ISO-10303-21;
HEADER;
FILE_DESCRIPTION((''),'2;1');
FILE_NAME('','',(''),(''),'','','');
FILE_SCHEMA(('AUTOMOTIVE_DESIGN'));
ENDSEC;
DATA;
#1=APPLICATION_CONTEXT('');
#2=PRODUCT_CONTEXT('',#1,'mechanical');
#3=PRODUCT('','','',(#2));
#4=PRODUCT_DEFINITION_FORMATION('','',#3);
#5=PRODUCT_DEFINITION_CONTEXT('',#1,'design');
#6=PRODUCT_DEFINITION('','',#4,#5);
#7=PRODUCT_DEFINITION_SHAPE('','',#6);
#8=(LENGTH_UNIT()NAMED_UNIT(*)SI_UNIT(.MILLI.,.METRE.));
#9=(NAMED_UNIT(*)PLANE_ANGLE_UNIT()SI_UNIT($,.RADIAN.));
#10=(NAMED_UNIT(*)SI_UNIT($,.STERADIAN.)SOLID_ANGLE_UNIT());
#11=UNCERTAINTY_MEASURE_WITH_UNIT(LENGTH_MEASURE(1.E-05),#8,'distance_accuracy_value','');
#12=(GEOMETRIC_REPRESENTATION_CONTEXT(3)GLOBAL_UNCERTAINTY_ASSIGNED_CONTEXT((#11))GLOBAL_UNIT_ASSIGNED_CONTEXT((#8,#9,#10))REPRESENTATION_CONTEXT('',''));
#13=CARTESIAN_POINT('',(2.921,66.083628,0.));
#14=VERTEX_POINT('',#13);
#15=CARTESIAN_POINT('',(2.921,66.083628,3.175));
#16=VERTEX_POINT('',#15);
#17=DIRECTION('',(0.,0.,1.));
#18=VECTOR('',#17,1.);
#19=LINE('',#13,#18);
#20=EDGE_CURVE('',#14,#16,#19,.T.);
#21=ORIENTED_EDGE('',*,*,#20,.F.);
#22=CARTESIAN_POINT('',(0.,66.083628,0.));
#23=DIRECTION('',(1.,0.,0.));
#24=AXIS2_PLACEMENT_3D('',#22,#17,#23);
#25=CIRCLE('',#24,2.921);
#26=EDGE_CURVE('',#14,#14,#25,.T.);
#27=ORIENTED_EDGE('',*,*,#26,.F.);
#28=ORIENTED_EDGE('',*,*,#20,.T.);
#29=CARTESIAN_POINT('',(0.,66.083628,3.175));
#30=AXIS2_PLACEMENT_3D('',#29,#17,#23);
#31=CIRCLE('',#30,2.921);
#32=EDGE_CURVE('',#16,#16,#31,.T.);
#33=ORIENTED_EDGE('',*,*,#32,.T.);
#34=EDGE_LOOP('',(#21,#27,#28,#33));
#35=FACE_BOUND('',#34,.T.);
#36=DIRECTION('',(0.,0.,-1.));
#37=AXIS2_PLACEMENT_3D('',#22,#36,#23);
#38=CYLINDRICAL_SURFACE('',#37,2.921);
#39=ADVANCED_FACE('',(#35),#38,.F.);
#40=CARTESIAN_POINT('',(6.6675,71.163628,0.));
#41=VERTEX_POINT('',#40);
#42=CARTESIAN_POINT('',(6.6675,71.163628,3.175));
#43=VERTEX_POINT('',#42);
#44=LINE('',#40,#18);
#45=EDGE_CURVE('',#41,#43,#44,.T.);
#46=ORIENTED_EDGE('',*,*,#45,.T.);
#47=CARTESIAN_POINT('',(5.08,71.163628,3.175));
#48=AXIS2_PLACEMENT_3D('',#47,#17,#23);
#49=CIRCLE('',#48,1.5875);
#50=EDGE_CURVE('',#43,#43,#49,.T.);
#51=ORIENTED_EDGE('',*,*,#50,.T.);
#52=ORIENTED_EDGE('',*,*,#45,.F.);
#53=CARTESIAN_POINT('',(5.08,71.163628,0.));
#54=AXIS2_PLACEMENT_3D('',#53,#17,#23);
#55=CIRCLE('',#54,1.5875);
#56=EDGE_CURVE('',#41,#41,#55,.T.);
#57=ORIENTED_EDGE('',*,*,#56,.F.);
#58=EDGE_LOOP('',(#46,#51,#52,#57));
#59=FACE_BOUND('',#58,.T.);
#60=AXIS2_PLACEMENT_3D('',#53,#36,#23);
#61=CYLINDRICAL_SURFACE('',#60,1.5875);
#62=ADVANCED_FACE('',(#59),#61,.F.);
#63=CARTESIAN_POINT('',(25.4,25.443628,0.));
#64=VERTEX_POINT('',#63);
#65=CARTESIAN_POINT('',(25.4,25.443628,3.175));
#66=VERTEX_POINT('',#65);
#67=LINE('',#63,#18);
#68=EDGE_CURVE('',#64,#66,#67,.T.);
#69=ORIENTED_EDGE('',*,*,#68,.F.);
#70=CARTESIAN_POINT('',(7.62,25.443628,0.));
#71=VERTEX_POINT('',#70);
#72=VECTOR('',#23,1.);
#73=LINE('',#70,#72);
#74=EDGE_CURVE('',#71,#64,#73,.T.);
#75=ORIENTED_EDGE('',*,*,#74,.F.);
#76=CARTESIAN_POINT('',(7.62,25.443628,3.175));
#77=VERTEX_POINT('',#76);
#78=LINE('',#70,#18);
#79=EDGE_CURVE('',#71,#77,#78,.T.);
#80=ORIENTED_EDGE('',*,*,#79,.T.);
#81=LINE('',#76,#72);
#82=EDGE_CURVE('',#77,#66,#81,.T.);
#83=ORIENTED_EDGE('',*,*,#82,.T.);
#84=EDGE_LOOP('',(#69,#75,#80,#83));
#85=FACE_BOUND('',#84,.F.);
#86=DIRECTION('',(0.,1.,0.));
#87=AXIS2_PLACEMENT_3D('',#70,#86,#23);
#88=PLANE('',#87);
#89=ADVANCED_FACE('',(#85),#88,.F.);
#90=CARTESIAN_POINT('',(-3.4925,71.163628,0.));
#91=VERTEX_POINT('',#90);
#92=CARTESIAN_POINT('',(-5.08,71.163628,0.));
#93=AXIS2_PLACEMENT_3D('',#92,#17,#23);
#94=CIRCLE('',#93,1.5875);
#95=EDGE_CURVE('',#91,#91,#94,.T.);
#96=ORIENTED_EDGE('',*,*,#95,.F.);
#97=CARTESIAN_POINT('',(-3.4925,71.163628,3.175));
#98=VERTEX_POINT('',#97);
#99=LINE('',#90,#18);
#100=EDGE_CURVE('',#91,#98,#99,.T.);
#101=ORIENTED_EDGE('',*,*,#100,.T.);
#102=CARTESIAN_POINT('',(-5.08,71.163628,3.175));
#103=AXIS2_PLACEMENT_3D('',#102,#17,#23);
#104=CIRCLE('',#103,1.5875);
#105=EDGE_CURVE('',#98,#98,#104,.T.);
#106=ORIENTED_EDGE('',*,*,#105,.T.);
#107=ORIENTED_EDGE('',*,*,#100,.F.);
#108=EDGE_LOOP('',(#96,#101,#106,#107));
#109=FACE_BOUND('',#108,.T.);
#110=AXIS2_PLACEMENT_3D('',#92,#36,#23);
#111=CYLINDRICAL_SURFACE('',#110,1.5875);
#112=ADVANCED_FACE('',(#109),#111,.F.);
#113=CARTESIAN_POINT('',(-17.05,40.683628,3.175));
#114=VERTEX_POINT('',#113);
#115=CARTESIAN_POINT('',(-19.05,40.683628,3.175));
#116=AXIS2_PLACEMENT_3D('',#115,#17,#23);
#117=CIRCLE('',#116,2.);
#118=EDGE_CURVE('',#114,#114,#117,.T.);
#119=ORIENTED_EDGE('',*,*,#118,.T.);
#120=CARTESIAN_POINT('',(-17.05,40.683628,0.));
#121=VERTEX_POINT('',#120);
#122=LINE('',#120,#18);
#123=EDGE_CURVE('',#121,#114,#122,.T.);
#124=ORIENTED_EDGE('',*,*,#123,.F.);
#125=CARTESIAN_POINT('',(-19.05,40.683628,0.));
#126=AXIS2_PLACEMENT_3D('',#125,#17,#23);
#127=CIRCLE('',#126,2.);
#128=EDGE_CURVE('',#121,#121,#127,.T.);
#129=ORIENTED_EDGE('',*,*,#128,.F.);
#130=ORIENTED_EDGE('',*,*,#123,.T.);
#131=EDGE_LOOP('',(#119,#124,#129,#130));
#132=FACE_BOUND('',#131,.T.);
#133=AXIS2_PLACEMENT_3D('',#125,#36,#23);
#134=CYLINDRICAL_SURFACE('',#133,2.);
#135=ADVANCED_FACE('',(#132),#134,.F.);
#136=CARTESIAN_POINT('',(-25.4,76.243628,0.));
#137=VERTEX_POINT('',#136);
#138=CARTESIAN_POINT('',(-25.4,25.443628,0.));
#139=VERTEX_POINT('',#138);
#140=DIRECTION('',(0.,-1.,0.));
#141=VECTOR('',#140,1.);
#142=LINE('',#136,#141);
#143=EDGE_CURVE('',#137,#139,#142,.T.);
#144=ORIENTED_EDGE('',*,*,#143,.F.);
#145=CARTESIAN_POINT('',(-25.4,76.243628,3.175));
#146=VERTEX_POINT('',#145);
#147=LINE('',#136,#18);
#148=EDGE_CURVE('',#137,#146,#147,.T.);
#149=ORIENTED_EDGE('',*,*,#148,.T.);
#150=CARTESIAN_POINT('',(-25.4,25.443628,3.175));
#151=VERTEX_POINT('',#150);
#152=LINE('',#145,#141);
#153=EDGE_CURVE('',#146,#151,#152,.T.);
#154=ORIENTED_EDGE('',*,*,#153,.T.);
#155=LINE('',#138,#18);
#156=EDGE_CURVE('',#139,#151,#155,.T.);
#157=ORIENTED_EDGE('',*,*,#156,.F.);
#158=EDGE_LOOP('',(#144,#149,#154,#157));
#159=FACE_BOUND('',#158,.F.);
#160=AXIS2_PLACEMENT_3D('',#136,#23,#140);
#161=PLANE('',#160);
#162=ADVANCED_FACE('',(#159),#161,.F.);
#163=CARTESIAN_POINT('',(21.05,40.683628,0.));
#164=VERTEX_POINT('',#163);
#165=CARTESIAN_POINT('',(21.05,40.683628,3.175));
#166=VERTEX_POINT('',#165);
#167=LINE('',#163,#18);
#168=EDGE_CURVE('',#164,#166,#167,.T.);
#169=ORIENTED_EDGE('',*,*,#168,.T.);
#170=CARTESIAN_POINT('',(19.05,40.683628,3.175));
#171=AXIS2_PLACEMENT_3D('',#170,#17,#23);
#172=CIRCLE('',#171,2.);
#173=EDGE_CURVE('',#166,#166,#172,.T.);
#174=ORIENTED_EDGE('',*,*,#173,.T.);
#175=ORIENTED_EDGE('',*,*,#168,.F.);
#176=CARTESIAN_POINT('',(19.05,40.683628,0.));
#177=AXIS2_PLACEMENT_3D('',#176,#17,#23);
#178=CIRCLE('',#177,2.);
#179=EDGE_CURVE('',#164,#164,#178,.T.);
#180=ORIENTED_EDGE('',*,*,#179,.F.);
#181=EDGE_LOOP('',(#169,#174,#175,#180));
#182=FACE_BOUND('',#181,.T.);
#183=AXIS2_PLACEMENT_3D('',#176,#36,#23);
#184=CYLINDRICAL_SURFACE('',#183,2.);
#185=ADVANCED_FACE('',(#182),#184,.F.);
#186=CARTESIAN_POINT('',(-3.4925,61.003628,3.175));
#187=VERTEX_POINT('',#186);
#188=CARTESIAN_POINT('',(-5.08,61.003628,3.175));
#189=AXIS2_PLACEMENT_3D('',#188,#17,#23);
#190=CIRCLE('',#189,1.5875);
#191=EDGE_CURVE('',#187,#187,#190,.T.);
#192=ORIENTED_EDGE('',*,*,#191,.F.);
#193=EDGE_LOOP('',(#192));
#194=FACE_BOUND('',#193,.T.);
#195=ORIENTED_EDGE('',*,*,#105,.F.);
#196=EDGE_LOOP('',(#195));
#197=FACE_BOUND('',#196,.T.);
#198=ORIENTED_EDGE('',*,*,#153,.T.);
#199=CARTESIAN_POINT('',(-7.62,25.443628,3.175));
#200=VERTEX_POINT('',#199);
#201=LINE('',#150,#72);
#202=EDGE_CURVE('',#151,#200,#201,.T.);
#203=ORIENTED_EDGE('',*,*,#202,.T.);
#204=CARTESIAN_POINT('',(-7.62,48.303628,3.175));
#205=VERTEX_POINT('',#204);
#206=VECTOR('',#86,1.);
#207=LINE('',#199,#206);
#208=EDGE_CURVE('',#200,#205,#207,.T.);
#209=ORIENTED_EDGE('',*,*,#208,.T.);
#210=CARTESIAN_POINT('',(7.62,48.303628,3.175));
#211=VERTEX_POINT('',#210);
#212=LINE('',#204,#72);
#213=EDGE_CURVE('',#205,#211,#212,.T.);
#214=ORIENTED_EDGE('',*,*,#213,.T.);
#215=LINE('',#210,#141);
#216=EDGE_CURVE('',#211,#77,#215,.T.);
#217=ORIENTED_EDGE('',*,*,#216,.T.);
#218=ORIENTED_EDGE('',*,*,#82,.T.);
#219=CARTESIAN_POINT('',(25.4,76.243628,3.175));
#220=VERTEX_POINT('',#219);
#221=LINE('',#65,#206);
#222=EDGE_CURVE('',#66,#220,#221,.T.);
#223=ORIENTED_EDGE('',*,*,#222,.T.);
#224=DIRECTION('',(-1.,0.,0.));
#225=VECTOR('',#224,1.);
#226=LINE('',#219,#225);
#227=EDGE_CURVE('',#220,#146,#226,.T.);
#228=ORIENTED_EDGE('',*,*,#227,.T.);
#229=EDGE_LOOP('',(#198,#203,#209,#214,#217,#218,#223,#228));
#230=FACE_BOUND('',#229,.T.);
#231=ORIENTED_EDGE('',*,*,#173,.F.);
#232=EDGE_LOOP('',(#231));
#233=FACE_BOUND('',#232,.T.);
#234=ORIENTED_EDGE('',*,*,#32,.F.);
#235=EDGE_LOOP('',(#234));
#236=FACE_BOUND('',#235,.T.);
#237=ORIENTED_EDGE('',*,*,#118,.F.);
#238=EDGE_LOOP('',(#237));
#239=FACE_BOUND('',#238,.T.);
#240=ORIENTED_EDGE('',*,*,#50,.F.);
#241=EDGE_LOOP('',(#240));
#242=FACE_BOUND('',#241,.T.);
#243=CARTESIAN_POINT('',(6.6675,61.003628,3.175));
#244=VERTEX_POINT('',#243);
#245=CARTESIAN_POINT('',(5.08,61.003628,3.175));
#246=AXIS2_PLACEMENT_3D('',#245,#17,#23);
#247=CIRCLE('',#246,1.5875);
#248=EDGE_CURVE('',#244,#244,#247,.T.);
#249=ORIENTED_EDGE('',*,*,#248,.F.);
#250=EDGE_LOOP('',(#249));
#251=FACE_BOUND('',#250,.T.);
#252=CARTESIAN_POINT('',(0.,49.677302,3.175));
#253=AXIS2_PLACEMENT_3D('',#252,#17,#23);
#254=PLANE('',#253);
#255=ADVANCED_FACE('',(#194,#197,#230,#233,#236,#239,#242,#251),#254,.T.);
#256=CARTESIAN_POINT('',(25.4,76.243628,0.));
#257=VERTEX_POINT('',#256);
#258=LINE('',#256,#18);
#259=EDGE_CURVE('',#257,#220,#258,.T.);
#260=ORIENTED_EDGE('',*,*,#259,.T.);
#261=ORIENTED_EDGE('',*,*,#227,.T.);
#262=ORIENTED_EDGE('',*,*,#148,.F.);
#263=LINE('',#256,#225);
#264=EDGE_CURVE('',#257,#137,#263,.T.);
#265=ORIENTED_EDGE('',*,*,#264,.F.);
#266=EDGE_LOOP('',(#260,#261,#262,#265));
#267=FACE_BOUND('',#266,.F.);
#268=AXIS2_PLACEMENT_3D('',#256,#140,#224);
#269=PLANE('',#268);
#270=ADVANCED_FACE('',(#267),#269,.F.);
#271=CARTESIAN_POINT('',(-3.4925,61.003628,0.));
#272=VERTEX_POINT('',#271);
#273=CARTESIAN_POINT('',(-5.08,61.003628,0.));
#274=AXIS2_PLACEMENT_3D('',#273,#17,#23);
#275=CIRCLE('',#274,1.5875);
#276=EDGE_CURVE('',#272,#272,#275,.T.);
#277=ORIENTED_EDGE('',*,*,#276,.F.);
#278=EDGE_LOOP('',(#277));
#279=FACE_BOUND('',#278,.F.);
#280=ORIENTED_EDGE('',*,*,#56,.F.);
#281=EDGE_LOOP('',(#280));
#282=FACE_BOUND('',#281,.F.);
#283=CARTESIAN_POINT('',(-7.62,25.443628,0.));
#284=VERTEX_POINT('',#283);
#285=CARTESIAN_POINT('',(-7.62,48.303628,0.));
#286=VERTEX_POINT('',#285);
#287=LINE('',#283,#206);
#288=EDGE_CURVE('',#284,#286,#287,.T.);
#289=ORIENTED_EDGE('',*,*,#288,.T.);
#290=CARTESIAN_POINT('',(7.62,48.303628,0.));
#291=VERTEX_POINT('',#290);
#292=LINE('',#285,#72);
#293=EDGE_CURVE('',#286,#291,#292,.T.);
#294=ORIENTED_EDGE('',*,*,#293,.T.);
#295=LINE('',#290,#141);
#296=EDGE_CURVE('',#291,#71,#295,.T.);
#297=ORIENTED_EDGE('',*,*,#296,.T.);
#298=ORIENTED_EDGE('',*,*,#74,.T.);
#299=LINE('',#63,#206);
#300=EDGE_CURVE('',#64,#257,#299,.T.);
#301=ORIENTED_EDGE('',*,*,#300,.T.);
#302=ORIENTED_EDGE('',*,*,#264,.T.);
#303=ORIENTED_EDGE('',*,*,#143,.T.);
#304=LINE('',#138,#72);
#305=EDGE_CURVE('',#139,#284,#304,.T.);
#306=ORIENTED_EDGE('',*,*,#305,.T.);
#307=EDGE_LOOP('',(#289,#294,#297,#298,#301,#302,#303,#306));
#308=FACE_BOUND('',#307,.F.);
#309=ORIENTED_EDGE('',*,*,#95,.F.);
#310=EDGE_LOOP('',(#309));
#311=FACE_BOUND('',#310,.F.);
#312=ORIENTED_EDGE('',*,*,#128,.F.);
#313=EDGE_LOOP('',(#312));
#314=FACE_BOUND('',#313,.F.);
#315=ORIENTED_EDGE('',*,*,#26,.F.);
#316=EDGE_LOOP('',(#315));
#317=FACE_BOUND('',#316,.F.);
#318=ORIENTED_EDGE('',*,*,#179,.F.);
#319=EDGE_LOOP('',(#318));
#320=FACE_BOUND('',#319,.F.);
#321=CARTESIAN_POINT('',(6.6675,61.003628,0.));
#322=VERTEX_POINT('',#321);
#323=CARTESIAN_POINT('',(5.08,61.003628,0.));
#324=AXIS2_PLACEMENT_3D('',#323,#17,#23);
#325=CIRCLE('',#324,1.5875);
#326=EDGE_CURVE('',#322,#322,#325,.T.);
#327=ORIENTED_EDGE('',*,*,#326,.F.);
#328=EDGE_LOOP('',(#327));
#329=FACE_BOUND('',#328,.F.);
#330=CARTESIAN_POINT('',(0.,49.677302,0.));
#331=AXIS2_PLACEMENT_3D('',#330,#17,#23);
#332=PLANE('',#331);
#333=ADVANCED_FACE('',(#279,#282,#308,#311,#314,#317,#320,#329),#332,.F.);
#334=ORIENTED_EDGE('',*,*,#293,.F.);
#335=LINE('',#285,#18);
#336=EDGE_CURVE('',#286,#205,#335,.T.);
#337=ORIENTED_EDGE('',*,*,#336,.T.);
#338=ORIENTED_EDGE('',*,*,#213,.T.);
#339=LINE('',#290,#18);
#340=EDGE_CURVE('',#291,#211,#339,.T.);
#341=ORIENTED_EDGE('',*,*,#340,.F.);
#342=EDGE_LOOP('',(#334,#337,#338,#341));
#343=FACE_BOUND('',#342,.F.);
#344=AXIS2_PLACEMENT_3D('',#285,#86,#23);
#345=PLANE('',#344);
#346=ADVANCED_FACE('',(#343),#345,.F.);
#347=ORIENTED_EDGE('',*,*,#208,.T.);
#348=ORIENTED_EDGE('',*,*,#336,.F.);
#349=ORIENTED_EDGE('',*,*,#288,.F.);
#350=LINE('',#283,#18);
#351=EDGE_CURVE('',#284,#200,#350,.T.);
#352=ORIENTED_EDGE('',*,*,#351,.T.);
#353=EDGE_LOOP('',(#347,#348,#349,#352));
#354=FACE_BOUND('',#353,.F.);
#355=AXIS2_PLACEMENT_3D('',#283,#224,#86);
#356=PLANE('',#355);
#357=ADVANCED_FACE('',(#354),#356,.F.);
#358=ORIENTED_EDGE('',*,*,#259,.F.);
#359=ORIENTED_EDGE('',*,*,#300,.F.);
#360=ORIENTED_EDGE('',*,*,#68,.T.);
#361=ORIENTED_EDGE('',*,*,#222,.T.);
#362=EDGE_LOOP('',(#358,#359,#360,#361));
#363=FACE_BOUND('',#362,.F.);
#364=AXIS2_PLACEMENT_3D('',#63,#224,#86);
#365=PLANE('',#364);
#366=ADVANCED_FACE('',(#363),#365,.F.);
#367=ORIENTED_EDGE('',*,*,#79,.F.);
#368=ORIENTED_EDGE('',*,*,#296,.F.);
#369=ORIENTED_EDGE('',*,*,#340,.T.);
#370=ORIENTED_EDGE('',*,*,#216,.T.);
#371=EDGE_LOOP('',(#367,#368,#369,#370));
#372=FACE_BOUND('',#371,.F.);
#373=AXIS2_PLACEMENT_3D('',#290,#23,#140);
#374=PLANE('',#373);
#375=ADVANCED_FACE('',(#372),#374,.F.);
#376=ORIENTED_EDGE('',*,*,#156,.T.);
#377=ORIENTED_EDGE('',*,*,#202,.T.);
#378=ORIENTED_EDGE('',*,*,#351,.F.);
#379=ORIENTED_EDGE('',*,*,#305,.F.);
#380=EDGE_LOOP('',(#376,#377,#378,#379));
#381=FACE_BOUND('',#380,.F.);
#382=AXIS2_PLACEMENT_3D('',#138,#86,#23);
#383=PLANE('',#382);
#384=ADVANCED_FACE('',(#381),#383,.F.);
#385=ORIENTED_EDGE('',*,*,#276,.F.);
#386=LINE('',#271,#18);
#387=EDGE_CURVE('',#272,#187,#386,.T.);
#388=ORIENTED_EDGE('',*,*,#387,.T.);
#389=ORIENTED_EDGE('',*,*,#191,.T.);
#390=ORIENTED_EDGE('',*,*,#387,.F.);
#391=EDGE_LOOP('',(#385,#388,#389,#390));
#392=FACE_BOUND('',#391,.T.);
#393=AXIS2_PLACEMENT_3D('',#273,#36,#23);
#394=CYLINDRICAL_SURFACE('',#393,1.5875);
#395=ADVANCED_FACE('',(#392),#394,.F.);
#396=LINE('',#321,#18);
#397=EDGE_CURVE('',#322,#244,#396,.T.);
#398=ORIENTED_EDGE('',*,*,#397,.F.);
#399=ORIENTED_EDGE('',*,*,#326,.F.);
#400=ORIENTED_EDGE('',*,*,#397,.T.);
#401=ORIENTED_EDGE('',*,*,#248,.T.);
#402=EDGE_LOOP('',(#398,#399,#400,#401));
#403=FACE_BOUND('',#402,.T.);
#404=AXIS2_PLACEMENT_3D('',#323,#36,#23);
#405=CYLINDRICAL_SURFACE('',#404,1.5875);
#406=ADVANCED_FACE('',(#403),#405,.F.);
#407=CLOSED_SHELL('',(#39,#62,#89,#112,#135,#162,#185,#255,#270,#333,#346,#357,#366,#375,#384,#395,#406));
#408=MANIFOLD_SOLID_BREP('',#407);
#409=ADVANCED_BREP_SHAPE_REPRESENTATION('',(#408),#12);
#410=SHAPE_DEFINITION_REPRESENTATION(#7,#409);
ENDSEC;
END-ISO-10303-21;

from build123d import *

# Parameters (mm, degrees)
F0_R     = 2
F0_R_2   = 1.5875
F0_R_3   = 2.921
F1_DEPTH = 3.175


# Not quite as in the source:
# - a feature names something its author has since deleted; it is built from what else it names


with BuildPart() as f1:
    # F0 (on Top) → F1 (new body)
    with BuildSketch(Plane.XY):
        Polygon((-25.4, 76.2436284547), (-25.4, 25.4436284547), (-7.62, 25.4436284547), (-7.62, 48.3036284547), (7.62, 48.3036284547), (7.62, 25.4436284547), (25.4, 25.4436284547), (25.4, 76.2436284547), align=None)
        with Locations((-19.05, 40.6836284547)):
            Circle(F0_R, mode=Mode.SUBTRACT)
        with Locations((19.05, 40.6836284547)):
            Circle(F0_R, mode=Mode.SUBTRACT)
        with Locations((-5.08, 61.0036284547)):
            Circle(F0_R_2, mode=Mode.SUBTRACT)
        with Locations((0, 66.0836284547)):
            Circle(F0_R_3, mode=Mode.SUBTRACT)
        with Locations((-5.08, 71.1636284547)):
            Circle(F0_R_2, mode=Mode.SUBTRACT)
        with Locations((5.08, 61.0036284547)):
            Circle(F0_R_2, mode=Mode.SUBTRACT)
        with Locations((5.08, 71.1636284547)):
            Circle(F0_R_2, mode=Mode.SUBTRACT)
    extrude(amount=F1_DEPTH)


solid = f1.part
